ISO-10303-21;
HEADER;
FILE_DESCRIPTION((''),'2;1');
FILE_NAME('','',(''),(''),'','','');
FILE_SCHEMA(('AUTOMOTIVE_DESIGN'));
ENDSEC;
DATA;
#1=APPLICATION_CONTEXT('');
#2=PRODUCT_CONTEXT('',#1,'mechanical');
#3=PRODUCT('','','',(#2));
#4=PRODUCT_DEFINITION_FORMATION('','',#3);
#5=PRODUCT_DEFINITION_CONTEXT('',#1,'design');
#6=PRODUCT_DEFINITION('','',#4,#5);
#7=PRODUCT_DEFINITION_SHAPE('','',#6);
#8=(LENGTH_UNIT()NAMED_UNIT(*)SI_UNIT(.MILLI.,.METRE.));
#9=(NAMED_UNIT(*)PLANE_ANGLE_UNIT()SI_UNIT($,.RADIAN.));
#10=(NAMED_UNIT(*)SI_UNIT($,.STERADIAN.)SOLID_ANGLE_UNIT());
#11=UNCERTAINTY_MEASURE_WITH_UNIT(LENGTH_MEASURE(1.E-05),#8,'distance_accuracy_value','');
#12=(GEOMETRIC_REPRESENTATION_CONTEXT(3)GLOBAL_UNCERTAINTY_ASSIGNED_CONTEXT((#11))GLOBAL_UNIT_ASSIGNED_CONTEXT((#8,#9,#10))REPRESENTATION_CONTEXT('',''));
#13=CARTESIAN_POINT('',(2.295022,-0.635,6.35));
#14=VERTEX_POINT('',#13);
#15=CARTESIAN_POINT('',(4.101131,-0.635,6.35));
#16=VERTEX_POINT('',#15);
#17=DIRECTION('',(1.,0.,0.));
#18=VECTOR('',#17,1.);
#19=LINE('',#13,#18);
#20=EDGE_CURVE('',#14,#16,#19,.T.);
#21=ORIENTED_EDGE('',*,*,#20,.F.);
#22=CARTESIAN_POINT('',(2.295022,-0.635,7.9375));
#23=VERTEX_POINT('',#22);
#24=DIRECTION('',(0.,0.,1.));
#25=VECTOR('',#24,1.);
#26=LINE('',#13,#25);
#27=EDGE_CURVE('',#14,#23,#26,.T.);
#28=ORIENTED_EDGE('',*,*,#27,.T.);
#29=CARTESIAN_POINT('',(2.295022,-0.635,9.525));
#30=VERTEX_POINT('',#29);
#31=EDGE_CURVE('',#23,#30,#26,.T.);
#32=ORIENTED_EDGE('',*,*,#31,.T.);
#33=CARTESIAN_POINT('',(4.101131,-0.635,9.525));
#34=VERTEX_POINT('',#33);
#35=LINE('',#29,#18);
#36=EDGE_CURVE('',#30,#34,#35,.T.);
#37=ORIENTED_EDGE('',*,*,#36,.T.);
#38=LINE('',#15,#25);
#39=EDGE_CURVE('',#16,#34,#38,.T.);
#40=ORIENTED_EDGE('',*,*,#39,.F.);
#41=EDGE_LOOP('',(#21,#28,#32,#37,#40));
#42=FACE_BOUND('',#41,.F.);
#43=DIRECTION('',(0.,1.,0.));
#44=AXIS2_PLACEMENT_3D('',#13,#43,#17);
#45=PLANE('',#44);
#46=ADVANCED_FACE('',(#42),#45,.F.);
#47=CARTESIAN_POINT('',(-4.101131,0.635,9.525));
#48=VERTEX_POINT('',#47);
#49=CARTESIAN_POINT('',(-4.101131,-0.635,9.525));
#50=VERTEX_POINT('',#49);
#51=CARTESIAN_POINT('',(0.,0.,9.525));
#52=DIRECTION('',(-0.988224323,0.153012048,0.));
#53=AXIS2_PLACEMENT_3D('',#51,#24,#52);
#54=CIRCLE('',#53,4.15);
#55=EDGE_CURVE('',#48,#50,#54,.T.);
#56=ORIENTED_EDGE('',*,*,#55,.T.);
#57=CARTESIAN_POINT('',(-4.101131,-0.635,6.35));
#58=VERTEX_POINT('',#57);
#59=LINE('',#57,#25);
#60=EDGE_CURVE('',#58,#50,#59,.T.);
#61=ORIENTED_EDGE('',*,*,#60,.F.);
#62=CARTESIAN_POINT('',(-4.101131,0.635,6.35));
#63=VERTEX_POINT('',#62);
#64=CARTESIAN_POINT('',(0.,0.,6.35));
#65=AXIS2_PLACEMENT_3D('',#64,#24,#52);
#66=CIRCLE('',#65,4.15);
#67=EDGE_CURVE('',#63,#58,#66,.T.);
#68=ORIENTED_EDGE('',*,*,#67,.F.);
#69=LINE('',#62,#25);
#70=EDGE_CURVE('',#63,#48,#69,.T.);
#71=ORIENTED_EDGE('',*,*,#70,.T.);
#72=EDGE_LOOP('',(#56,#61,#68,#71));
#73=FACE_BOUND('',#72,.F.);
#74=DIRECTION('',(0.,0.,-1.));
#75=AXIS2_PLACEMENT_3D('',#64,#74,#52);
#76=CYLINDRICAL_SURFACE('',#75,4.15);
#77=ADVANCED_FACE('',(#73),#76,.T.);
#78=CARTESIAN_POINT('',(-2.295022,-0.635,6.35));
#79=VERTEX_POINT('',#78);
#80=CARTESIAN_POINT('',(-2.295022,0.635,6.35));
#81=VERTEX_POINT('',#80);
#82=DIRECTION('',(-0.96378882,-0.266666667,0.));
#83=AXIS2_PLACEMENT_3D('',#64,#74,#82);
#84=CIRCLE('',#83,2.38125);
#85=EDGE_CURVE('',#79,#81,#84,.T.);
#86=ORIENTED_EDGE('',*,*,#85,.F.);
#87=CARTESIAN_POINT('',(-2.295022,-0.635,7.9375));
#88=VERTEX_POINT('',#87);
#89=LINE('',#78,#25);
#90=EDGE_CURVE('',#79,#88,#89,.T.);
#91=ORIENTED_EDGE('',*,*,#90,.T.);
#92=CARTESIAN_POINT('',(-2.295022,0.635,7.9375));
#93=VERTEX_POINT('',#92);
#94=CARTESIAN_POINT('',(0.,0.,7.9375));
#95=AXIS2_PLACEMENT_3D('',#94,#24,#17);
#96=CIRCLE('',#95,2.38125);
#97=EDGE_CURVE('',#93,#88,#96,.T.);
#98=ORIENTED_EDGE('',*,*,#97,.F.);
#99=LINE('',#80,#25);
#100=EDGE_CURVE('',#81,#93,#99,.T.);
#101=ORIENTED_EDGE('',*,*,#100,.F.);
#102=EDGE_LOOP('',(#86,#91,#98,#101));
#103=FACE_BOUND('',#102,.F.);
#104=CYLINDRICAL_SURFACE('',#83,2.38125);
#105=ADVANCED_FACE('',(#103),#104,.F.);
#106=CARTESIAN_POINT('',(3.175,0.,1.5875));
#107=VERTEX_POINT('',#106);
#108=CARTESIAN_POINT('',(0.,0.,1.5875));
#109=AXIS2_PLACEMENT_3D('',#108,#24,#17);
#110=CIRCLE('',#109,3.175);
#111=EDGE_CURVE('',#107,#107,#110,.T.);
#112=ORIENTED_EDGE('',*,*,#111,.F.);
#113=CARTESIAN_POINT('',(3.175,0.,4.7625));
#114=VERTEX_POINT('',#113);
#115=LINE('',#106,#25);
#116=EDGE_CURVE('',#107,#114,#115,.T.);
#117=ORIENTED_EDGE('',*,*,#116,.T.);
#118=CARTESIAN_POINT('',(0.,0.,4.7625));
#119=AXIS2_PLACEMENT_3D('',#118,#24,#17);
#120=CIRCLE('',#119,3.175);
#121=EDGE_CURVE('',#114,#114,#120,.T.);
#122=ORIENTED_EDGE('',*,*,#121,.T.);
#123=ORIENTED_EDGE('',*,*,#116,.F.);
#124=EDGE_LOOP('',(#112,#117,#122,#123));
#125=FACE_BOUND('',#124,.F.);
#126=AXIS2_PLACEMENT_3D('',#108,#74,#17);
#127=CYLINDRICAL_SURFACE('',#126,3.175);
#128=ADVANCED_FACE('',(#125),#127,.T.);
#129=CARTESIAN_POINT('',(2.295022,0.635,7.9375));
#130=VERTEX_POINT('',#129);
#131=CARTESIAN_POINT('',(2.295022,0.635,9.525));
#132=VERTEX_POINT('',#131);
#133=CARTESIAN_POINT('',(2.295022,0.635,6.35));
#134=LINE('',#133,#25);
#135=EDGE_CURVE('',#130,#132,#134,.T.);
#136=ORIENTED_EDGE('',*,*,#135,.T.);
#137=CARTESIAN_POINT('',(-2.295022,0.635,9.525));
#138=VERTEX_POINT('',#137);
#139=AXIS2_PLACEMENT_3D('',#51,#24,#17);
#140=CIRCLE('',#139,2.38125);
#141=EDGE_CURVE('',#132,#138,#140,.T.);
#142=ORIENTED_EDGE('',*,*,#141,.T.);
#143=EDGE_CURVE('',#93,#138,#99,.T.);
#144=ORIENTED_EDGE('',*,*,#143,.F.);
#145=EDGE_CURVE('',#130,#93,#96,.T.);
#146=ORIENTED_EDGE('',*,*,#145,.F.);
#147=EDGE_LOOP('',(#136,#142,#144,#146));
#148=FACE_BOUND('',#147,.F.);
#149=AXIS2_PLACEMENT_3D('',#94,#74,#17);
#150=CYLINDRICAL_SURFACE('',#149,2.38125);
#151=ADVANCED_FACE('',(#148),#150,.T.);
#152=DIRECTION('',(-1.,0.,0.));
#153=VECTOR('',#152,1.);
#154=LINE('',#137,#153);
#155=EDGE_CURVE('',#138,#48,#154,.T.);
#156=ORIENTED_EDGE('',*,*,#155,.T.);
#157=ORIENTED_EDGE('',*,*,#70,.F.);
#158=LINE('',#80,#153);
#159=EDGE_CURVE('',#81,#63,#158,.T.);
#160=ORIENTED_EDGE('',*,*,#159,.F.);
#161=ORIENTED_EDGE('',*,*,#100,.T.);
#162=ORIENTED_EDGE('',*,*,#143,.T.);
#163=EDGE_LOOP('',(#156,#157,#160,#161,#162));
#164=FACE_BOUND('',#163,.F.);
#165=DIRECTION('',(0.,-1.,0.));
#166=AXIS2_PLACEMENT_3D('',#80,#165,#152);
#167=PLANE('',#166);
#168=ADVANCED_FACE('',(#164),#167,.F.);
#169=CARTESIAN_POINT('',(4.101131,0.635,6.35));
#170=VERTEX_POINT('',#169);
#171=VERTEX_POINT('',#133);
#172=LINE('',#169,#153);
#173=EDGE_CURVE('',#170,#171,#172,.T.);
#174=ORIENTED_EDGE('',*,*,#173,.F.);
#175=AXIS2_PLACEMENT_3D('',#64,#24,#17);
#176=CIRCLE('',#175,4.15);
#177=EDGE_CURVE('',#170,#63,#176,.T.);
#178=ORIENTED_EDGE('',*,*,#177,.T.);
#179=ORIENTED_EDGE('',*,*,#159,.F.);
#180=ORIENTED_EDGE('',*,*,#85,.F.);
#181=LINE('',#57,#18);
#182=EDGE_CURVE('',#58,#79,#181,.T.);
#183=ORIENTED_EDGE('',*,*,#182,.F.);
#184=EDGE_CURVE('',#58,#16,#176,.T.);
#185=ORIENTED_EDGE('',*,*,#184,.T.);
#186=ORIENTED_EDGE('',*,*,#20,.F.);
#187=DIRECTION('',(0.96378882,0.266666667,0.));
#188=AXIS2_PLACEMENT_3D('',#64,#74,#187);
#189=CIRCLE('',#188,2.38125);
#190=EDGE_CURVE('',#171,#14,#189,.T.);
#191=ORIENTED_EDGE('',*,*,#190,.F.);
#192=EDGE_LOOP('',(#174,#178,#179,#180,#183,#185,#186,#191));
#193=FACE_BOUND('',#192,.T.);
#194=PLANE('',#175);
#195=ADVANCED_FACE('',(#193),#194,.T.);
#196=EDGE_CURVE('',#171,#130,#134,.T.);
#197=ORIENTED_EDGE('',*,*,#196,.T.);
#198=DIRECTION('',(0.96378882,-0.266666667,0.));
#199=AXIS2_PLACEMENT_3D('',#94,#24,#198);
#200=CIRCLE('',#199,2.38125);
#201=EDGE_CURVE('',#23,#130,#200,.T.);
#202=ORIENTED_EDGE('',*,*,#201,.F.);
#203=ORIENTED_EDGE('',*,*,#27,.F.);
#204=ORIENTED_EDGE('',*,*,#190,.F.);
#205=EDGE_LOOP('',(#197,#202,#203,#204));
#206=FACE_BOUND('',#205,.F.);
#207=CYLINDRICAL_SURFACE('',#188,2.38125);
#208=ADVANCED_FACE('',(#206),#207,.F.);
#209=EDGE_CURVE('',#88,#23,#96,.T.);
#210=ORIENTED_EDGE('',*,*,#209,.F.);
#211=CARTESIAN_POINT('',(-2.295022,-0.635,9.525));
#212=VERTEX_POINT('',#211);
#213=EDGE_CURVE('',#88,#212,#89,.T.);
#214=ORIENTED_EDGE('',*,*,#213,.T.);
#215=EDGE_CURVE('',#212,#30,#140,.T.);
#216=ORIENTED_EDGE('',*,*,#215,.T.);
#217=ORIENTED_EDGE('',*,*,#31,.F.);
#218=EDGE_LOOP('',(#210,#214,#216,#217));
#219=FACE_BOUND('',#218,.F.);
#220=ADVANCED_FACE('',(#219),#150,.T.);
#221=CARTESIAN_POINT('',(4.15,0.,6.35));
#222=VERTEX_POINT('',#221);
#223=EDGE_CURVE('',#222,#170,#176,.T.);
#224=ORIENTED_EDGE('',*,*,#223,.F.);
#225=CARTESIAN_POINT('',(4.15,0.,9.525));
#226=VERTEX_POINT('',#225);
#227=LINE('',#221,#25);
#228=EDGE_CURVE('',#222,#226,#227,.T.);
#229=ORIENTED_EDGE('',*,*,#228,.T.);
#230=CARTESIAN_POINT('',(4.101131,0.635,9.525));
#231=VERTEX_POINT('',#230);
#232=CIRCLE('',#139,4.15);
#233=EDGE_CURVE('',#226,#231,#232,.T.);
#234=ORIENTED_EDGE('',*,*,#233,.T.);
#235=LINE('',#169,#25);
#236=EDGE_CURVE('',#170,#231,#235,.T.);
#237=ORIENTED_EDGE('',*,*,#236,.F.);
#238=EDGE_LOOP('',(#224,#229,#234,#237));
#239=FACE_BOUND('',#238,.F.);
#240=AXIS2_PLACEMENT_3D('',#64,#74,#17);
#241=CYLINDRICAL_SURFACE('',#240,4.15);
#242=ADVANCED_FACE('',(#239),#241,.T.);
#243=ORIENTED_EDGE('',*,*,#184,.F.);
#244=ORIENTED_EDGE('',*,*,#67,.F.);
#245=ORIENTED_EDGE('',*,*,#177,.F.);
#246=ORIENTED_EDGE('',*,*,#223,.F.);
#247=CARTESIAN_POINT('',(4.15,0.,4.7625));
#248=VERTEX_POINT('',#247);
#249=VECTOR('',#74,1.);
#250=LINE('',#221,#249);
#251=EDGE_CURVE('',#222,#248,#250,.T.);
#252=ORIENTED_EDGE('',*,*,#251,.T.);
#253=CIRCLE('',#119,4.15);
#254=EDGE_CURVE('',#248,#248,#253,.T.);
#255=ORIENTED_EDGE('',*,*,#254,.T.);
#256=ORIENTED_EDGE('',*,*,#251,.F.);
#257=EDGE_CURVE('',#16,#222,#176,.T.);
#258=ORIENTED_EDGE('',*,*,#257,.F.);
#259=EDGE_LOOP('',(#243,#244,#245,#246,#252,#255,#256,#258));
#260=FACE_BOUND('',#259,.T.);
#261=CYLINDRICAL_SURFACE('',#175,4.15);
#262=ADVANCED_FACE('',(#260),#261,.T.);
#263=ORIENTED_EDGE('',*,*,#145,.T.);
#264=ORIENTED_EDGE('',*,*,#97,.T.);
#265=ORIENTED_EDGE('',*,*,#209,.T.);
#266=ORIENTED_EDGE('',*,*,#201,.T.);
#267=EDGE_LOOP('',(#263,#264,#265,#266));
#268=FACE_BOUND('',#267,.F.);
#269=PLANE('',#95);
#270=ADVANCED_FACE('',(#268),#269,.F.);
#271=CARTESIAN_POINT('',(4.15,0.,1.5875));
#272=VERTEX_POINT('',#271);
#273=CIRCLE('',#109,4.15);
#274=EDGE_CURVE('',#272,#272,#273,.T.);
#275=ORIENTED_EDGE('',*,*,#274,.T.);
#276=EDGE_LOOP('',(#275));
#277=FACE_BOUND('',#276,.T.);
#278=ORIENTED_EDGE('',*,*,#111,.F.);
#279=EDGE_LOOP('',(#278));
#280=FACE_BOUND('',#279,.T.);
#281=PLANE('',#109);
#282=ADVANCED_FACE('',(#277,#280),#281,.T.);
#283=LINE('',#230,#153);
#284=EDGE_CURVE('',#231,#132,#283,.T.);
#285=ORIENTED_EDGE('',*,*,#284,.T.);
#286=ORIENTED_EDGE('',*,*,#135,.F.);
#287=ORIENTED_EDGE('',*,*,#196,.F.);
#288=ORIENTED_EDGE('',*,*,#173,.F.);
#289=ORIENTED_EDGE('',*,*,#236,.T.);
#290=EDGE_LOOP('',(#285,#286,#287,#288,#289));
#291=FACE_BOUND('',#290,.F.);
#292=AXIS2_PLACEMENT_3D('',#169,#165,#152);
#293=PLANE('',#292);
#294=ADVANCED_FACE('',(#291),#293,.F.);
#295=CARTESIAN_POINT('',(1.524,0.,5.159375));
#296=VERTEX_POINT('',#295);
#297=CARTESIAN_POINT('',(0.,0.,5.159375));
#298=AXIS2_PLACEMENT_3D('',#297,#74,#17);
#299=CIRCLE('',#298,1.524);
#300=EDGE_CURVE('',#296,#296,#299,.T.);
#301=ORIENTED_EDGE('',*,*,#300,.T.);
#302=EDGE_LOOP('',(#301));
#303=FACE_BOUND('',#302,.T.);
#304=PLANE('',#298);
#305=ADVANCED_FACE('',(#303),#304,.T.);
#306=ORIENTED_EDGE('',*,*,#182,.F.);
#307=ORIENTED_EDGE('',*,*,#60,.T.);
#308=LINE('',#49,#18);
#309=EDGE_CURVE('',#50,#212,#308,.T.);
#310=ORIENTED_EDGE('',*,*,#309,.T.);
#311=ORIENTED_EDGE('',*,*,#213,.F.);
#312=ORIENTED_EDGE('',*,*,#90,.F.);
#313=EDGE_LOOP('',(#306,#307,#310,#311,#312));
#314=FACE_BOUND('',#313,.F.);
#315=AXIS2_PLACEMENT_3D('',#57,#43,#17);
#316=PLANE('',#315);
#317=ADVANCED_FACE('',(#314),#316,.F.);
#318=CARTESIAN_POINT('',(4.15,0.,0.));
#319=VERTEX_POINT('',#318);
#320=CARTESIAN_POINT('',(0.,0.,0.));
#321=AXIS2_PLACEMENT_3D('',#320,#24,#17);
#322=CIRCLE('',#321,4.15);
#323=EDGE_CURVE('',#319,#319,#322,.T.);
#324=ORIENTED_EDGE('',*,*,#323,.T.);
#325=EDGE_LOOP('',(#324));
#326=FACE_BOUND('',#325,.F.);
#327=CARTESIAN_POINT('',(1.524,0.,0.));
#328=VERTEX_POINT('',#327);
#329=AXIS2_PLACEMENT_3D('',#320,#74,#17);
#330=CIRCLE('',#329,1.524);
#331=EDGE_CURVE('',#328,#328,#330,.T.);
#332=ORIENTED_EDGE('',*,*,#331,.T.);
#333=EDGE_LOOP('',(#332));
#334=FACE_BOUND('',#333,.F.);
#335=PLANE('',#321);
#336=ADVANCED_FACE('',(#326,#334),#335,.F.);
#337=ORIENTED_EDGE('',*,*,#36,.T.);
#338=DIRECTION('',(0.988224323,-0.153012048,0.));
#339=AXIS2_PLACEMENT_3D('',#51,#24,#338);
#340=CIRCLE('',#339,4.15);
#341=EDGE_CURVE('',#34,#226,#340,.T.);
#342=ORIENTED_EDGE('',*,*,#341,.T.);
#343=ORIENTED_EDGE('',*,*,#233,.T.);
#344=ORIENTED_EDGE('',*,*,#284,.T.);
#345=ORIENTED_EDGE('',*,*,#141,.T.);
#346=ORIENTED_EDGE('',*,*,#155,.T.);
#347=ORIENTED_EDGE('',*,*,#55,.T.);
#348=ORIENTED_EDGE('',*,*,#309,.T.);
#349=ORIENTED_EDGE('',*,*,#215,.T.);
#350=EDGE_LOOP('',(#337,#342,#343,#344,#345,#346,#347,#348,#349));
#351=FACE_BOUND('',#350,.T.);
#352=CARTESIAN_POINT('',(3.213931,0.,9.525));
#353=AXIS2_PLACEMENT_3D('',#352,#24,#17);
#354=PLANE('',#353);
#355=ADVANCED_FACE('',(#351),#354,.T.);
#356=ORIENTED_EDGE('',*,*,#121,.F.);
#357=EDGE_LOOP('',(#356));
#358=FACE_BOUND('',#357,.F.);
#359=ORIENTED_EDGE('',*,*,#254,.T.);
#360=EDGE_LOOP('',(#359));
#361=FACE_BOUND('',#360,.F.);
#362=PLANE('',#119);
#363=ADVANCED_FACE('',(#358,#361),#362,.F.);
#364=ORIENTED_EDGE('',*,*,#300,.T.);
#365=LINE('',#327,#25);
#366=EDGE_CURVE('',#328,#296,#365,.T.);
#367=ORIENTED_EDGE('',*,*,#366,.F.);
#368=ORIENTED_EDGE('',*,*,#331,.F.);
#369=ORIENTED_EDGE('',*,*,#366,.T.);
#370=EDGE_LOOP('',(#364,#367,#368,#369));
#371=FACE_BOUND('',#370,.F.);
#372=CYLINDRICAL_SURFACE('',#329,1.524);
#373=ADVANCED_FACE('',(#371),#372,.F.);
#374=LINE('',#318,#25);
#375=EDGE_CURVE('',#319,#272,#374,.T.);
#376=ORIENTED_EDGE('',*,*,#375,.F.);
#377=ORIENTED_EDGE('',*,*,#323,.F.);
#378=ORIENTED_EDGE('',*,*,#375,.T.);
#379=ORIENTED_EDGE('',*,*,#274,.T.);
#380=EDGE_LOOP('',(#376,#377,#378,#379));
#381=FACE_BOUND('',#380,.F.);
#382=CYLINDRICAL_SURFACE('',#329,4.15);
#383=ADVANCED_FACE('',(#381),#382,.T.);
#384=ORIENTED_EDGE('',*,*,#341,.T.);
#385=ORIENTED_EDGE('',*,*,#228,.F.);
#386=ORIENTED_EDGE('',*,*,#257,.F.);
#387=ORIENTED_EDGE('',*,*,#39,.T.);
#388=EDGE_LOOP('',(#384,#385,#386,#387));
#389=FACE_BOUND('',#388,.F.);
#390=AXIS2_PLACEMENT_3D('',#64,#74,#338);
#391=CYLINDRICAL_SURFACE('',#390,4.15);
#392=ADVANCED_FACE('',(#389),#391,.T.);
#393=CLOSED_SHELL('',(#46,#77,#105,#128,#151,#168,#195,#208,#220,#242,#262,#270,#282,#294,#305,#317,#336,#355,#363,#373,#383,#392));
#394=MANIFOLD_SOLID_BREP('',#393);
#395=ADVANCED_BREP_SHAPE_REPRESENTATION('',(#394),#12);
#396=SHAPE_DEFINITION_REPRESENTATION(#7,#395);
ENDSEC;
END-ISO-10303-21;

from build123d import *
from build123d import SkipClean  # not in build123d's __all__

# Parameters (mm, degrees)
F0_R      = 4.15
F1_DEPTH  = 1.5875
F3_R      = 4.15
F4_DEPTH  = 1.5875
F6_R      = 2.38125
F7_DEPTH  = 1.5875
F9_DEPTH  = 3.175
F10_R     = 3.175
F11_DEPTH = 3.175
F12_R     = 1.524
F13_DEPTH = 5.159375


# Not quite as in the source:
# - after a boolean that leaves OpenCascade's solid faulty, fix() repairs it


with BuildPart() as f1:
    # F0 (on Top) → F1 (new body)
    with BuildSketch(Plane.XY):
        Circle(F0_R)
    extrude(amount=F1_DEPTH)



with BuildPart() as f4:
    # F3 (on offset) → F4 (new body)
    with BuildSketch(Plane.XY.offset(6.35)):
        Circle(F3_R)
    extrude(amount=-F4_DEPTH)



with BuildPart() as f7:
    # F6 (on offset) → F7 (new body)
    with BuildSketch(Plane.XY.offset(7.9375)):
        Circle(F6_R)
    extrude(amount=F7_DEPTH)


with BuildPart() as f4_1:
    add(f4.part, clean=False)

    add(f7.part)  # F9 merges F7
    # F8 (on face) → F9 (join, through all)
    with BuildSketch(Plane.XY.offset(6.35)):
        with BuildLine():
            Line((2.2950221268, -0.635), (4.1011309416, -0.635))
            ThreePointArc((4.1011309416, -0.635), (4.1377646989, -0.3184388422), (4.15, 0))
            ThreePointArc((4.15, 0), (4.1377646989, 0.3184388422), (4.1011309416, 0.635))
            Line((4.1011309416, 0.635), (2.2950221268, 0.635))
            ThreePointArc((2.2950221268, 0.635), (2.38125, 0), (2.2950221268, -0.635))
        make_face()
        with BuildLine():
            ThreePointArc((-4.1011309416, 0.635), (-4.15, 0), (-4.1011309416, -0.635))
            Line((-4.1011309416, -0.635), (-2.2950221268, -0.635))
            ThreePointArc((-2.2950221268, -0.635), (-2.38125, 0), (-2.2950221268, 0.635))
            Line((-2.2950221268, 0.635), (-4.1011309416, 0.635))
        make_face()
    extrude(amount=F9_DEPTH)

    add(f4_1.part.fix(), mode=Mode.REPLACE)


with BuildPart() as f1_1:
    add(f1.part, clean=False)

    add(f4_1.part)  # F11 merges F4
    # F10 (on face) → F11 (join, through all)
    with BuildSketch(Plane.XY.offset(1.5875)):
        Circle(F10_R)
    extrude(amount=F11_DEPTH)

    # F12 (on face) → F13 (cut)
    with BuildSketch(Plane(origin=(0, 0, 0), x_dir=(1, 0, 0), z_dir=(0, 0, -1))):
        Circle(F12_R)
    with SkipClean():  # cleaning this boolean's faces spoils the solid; the shape is the same uncleaned
        extrude(amount=-F13_DEPTH, mode=Mode.SUBTRACT)


solid = f1_1.part
